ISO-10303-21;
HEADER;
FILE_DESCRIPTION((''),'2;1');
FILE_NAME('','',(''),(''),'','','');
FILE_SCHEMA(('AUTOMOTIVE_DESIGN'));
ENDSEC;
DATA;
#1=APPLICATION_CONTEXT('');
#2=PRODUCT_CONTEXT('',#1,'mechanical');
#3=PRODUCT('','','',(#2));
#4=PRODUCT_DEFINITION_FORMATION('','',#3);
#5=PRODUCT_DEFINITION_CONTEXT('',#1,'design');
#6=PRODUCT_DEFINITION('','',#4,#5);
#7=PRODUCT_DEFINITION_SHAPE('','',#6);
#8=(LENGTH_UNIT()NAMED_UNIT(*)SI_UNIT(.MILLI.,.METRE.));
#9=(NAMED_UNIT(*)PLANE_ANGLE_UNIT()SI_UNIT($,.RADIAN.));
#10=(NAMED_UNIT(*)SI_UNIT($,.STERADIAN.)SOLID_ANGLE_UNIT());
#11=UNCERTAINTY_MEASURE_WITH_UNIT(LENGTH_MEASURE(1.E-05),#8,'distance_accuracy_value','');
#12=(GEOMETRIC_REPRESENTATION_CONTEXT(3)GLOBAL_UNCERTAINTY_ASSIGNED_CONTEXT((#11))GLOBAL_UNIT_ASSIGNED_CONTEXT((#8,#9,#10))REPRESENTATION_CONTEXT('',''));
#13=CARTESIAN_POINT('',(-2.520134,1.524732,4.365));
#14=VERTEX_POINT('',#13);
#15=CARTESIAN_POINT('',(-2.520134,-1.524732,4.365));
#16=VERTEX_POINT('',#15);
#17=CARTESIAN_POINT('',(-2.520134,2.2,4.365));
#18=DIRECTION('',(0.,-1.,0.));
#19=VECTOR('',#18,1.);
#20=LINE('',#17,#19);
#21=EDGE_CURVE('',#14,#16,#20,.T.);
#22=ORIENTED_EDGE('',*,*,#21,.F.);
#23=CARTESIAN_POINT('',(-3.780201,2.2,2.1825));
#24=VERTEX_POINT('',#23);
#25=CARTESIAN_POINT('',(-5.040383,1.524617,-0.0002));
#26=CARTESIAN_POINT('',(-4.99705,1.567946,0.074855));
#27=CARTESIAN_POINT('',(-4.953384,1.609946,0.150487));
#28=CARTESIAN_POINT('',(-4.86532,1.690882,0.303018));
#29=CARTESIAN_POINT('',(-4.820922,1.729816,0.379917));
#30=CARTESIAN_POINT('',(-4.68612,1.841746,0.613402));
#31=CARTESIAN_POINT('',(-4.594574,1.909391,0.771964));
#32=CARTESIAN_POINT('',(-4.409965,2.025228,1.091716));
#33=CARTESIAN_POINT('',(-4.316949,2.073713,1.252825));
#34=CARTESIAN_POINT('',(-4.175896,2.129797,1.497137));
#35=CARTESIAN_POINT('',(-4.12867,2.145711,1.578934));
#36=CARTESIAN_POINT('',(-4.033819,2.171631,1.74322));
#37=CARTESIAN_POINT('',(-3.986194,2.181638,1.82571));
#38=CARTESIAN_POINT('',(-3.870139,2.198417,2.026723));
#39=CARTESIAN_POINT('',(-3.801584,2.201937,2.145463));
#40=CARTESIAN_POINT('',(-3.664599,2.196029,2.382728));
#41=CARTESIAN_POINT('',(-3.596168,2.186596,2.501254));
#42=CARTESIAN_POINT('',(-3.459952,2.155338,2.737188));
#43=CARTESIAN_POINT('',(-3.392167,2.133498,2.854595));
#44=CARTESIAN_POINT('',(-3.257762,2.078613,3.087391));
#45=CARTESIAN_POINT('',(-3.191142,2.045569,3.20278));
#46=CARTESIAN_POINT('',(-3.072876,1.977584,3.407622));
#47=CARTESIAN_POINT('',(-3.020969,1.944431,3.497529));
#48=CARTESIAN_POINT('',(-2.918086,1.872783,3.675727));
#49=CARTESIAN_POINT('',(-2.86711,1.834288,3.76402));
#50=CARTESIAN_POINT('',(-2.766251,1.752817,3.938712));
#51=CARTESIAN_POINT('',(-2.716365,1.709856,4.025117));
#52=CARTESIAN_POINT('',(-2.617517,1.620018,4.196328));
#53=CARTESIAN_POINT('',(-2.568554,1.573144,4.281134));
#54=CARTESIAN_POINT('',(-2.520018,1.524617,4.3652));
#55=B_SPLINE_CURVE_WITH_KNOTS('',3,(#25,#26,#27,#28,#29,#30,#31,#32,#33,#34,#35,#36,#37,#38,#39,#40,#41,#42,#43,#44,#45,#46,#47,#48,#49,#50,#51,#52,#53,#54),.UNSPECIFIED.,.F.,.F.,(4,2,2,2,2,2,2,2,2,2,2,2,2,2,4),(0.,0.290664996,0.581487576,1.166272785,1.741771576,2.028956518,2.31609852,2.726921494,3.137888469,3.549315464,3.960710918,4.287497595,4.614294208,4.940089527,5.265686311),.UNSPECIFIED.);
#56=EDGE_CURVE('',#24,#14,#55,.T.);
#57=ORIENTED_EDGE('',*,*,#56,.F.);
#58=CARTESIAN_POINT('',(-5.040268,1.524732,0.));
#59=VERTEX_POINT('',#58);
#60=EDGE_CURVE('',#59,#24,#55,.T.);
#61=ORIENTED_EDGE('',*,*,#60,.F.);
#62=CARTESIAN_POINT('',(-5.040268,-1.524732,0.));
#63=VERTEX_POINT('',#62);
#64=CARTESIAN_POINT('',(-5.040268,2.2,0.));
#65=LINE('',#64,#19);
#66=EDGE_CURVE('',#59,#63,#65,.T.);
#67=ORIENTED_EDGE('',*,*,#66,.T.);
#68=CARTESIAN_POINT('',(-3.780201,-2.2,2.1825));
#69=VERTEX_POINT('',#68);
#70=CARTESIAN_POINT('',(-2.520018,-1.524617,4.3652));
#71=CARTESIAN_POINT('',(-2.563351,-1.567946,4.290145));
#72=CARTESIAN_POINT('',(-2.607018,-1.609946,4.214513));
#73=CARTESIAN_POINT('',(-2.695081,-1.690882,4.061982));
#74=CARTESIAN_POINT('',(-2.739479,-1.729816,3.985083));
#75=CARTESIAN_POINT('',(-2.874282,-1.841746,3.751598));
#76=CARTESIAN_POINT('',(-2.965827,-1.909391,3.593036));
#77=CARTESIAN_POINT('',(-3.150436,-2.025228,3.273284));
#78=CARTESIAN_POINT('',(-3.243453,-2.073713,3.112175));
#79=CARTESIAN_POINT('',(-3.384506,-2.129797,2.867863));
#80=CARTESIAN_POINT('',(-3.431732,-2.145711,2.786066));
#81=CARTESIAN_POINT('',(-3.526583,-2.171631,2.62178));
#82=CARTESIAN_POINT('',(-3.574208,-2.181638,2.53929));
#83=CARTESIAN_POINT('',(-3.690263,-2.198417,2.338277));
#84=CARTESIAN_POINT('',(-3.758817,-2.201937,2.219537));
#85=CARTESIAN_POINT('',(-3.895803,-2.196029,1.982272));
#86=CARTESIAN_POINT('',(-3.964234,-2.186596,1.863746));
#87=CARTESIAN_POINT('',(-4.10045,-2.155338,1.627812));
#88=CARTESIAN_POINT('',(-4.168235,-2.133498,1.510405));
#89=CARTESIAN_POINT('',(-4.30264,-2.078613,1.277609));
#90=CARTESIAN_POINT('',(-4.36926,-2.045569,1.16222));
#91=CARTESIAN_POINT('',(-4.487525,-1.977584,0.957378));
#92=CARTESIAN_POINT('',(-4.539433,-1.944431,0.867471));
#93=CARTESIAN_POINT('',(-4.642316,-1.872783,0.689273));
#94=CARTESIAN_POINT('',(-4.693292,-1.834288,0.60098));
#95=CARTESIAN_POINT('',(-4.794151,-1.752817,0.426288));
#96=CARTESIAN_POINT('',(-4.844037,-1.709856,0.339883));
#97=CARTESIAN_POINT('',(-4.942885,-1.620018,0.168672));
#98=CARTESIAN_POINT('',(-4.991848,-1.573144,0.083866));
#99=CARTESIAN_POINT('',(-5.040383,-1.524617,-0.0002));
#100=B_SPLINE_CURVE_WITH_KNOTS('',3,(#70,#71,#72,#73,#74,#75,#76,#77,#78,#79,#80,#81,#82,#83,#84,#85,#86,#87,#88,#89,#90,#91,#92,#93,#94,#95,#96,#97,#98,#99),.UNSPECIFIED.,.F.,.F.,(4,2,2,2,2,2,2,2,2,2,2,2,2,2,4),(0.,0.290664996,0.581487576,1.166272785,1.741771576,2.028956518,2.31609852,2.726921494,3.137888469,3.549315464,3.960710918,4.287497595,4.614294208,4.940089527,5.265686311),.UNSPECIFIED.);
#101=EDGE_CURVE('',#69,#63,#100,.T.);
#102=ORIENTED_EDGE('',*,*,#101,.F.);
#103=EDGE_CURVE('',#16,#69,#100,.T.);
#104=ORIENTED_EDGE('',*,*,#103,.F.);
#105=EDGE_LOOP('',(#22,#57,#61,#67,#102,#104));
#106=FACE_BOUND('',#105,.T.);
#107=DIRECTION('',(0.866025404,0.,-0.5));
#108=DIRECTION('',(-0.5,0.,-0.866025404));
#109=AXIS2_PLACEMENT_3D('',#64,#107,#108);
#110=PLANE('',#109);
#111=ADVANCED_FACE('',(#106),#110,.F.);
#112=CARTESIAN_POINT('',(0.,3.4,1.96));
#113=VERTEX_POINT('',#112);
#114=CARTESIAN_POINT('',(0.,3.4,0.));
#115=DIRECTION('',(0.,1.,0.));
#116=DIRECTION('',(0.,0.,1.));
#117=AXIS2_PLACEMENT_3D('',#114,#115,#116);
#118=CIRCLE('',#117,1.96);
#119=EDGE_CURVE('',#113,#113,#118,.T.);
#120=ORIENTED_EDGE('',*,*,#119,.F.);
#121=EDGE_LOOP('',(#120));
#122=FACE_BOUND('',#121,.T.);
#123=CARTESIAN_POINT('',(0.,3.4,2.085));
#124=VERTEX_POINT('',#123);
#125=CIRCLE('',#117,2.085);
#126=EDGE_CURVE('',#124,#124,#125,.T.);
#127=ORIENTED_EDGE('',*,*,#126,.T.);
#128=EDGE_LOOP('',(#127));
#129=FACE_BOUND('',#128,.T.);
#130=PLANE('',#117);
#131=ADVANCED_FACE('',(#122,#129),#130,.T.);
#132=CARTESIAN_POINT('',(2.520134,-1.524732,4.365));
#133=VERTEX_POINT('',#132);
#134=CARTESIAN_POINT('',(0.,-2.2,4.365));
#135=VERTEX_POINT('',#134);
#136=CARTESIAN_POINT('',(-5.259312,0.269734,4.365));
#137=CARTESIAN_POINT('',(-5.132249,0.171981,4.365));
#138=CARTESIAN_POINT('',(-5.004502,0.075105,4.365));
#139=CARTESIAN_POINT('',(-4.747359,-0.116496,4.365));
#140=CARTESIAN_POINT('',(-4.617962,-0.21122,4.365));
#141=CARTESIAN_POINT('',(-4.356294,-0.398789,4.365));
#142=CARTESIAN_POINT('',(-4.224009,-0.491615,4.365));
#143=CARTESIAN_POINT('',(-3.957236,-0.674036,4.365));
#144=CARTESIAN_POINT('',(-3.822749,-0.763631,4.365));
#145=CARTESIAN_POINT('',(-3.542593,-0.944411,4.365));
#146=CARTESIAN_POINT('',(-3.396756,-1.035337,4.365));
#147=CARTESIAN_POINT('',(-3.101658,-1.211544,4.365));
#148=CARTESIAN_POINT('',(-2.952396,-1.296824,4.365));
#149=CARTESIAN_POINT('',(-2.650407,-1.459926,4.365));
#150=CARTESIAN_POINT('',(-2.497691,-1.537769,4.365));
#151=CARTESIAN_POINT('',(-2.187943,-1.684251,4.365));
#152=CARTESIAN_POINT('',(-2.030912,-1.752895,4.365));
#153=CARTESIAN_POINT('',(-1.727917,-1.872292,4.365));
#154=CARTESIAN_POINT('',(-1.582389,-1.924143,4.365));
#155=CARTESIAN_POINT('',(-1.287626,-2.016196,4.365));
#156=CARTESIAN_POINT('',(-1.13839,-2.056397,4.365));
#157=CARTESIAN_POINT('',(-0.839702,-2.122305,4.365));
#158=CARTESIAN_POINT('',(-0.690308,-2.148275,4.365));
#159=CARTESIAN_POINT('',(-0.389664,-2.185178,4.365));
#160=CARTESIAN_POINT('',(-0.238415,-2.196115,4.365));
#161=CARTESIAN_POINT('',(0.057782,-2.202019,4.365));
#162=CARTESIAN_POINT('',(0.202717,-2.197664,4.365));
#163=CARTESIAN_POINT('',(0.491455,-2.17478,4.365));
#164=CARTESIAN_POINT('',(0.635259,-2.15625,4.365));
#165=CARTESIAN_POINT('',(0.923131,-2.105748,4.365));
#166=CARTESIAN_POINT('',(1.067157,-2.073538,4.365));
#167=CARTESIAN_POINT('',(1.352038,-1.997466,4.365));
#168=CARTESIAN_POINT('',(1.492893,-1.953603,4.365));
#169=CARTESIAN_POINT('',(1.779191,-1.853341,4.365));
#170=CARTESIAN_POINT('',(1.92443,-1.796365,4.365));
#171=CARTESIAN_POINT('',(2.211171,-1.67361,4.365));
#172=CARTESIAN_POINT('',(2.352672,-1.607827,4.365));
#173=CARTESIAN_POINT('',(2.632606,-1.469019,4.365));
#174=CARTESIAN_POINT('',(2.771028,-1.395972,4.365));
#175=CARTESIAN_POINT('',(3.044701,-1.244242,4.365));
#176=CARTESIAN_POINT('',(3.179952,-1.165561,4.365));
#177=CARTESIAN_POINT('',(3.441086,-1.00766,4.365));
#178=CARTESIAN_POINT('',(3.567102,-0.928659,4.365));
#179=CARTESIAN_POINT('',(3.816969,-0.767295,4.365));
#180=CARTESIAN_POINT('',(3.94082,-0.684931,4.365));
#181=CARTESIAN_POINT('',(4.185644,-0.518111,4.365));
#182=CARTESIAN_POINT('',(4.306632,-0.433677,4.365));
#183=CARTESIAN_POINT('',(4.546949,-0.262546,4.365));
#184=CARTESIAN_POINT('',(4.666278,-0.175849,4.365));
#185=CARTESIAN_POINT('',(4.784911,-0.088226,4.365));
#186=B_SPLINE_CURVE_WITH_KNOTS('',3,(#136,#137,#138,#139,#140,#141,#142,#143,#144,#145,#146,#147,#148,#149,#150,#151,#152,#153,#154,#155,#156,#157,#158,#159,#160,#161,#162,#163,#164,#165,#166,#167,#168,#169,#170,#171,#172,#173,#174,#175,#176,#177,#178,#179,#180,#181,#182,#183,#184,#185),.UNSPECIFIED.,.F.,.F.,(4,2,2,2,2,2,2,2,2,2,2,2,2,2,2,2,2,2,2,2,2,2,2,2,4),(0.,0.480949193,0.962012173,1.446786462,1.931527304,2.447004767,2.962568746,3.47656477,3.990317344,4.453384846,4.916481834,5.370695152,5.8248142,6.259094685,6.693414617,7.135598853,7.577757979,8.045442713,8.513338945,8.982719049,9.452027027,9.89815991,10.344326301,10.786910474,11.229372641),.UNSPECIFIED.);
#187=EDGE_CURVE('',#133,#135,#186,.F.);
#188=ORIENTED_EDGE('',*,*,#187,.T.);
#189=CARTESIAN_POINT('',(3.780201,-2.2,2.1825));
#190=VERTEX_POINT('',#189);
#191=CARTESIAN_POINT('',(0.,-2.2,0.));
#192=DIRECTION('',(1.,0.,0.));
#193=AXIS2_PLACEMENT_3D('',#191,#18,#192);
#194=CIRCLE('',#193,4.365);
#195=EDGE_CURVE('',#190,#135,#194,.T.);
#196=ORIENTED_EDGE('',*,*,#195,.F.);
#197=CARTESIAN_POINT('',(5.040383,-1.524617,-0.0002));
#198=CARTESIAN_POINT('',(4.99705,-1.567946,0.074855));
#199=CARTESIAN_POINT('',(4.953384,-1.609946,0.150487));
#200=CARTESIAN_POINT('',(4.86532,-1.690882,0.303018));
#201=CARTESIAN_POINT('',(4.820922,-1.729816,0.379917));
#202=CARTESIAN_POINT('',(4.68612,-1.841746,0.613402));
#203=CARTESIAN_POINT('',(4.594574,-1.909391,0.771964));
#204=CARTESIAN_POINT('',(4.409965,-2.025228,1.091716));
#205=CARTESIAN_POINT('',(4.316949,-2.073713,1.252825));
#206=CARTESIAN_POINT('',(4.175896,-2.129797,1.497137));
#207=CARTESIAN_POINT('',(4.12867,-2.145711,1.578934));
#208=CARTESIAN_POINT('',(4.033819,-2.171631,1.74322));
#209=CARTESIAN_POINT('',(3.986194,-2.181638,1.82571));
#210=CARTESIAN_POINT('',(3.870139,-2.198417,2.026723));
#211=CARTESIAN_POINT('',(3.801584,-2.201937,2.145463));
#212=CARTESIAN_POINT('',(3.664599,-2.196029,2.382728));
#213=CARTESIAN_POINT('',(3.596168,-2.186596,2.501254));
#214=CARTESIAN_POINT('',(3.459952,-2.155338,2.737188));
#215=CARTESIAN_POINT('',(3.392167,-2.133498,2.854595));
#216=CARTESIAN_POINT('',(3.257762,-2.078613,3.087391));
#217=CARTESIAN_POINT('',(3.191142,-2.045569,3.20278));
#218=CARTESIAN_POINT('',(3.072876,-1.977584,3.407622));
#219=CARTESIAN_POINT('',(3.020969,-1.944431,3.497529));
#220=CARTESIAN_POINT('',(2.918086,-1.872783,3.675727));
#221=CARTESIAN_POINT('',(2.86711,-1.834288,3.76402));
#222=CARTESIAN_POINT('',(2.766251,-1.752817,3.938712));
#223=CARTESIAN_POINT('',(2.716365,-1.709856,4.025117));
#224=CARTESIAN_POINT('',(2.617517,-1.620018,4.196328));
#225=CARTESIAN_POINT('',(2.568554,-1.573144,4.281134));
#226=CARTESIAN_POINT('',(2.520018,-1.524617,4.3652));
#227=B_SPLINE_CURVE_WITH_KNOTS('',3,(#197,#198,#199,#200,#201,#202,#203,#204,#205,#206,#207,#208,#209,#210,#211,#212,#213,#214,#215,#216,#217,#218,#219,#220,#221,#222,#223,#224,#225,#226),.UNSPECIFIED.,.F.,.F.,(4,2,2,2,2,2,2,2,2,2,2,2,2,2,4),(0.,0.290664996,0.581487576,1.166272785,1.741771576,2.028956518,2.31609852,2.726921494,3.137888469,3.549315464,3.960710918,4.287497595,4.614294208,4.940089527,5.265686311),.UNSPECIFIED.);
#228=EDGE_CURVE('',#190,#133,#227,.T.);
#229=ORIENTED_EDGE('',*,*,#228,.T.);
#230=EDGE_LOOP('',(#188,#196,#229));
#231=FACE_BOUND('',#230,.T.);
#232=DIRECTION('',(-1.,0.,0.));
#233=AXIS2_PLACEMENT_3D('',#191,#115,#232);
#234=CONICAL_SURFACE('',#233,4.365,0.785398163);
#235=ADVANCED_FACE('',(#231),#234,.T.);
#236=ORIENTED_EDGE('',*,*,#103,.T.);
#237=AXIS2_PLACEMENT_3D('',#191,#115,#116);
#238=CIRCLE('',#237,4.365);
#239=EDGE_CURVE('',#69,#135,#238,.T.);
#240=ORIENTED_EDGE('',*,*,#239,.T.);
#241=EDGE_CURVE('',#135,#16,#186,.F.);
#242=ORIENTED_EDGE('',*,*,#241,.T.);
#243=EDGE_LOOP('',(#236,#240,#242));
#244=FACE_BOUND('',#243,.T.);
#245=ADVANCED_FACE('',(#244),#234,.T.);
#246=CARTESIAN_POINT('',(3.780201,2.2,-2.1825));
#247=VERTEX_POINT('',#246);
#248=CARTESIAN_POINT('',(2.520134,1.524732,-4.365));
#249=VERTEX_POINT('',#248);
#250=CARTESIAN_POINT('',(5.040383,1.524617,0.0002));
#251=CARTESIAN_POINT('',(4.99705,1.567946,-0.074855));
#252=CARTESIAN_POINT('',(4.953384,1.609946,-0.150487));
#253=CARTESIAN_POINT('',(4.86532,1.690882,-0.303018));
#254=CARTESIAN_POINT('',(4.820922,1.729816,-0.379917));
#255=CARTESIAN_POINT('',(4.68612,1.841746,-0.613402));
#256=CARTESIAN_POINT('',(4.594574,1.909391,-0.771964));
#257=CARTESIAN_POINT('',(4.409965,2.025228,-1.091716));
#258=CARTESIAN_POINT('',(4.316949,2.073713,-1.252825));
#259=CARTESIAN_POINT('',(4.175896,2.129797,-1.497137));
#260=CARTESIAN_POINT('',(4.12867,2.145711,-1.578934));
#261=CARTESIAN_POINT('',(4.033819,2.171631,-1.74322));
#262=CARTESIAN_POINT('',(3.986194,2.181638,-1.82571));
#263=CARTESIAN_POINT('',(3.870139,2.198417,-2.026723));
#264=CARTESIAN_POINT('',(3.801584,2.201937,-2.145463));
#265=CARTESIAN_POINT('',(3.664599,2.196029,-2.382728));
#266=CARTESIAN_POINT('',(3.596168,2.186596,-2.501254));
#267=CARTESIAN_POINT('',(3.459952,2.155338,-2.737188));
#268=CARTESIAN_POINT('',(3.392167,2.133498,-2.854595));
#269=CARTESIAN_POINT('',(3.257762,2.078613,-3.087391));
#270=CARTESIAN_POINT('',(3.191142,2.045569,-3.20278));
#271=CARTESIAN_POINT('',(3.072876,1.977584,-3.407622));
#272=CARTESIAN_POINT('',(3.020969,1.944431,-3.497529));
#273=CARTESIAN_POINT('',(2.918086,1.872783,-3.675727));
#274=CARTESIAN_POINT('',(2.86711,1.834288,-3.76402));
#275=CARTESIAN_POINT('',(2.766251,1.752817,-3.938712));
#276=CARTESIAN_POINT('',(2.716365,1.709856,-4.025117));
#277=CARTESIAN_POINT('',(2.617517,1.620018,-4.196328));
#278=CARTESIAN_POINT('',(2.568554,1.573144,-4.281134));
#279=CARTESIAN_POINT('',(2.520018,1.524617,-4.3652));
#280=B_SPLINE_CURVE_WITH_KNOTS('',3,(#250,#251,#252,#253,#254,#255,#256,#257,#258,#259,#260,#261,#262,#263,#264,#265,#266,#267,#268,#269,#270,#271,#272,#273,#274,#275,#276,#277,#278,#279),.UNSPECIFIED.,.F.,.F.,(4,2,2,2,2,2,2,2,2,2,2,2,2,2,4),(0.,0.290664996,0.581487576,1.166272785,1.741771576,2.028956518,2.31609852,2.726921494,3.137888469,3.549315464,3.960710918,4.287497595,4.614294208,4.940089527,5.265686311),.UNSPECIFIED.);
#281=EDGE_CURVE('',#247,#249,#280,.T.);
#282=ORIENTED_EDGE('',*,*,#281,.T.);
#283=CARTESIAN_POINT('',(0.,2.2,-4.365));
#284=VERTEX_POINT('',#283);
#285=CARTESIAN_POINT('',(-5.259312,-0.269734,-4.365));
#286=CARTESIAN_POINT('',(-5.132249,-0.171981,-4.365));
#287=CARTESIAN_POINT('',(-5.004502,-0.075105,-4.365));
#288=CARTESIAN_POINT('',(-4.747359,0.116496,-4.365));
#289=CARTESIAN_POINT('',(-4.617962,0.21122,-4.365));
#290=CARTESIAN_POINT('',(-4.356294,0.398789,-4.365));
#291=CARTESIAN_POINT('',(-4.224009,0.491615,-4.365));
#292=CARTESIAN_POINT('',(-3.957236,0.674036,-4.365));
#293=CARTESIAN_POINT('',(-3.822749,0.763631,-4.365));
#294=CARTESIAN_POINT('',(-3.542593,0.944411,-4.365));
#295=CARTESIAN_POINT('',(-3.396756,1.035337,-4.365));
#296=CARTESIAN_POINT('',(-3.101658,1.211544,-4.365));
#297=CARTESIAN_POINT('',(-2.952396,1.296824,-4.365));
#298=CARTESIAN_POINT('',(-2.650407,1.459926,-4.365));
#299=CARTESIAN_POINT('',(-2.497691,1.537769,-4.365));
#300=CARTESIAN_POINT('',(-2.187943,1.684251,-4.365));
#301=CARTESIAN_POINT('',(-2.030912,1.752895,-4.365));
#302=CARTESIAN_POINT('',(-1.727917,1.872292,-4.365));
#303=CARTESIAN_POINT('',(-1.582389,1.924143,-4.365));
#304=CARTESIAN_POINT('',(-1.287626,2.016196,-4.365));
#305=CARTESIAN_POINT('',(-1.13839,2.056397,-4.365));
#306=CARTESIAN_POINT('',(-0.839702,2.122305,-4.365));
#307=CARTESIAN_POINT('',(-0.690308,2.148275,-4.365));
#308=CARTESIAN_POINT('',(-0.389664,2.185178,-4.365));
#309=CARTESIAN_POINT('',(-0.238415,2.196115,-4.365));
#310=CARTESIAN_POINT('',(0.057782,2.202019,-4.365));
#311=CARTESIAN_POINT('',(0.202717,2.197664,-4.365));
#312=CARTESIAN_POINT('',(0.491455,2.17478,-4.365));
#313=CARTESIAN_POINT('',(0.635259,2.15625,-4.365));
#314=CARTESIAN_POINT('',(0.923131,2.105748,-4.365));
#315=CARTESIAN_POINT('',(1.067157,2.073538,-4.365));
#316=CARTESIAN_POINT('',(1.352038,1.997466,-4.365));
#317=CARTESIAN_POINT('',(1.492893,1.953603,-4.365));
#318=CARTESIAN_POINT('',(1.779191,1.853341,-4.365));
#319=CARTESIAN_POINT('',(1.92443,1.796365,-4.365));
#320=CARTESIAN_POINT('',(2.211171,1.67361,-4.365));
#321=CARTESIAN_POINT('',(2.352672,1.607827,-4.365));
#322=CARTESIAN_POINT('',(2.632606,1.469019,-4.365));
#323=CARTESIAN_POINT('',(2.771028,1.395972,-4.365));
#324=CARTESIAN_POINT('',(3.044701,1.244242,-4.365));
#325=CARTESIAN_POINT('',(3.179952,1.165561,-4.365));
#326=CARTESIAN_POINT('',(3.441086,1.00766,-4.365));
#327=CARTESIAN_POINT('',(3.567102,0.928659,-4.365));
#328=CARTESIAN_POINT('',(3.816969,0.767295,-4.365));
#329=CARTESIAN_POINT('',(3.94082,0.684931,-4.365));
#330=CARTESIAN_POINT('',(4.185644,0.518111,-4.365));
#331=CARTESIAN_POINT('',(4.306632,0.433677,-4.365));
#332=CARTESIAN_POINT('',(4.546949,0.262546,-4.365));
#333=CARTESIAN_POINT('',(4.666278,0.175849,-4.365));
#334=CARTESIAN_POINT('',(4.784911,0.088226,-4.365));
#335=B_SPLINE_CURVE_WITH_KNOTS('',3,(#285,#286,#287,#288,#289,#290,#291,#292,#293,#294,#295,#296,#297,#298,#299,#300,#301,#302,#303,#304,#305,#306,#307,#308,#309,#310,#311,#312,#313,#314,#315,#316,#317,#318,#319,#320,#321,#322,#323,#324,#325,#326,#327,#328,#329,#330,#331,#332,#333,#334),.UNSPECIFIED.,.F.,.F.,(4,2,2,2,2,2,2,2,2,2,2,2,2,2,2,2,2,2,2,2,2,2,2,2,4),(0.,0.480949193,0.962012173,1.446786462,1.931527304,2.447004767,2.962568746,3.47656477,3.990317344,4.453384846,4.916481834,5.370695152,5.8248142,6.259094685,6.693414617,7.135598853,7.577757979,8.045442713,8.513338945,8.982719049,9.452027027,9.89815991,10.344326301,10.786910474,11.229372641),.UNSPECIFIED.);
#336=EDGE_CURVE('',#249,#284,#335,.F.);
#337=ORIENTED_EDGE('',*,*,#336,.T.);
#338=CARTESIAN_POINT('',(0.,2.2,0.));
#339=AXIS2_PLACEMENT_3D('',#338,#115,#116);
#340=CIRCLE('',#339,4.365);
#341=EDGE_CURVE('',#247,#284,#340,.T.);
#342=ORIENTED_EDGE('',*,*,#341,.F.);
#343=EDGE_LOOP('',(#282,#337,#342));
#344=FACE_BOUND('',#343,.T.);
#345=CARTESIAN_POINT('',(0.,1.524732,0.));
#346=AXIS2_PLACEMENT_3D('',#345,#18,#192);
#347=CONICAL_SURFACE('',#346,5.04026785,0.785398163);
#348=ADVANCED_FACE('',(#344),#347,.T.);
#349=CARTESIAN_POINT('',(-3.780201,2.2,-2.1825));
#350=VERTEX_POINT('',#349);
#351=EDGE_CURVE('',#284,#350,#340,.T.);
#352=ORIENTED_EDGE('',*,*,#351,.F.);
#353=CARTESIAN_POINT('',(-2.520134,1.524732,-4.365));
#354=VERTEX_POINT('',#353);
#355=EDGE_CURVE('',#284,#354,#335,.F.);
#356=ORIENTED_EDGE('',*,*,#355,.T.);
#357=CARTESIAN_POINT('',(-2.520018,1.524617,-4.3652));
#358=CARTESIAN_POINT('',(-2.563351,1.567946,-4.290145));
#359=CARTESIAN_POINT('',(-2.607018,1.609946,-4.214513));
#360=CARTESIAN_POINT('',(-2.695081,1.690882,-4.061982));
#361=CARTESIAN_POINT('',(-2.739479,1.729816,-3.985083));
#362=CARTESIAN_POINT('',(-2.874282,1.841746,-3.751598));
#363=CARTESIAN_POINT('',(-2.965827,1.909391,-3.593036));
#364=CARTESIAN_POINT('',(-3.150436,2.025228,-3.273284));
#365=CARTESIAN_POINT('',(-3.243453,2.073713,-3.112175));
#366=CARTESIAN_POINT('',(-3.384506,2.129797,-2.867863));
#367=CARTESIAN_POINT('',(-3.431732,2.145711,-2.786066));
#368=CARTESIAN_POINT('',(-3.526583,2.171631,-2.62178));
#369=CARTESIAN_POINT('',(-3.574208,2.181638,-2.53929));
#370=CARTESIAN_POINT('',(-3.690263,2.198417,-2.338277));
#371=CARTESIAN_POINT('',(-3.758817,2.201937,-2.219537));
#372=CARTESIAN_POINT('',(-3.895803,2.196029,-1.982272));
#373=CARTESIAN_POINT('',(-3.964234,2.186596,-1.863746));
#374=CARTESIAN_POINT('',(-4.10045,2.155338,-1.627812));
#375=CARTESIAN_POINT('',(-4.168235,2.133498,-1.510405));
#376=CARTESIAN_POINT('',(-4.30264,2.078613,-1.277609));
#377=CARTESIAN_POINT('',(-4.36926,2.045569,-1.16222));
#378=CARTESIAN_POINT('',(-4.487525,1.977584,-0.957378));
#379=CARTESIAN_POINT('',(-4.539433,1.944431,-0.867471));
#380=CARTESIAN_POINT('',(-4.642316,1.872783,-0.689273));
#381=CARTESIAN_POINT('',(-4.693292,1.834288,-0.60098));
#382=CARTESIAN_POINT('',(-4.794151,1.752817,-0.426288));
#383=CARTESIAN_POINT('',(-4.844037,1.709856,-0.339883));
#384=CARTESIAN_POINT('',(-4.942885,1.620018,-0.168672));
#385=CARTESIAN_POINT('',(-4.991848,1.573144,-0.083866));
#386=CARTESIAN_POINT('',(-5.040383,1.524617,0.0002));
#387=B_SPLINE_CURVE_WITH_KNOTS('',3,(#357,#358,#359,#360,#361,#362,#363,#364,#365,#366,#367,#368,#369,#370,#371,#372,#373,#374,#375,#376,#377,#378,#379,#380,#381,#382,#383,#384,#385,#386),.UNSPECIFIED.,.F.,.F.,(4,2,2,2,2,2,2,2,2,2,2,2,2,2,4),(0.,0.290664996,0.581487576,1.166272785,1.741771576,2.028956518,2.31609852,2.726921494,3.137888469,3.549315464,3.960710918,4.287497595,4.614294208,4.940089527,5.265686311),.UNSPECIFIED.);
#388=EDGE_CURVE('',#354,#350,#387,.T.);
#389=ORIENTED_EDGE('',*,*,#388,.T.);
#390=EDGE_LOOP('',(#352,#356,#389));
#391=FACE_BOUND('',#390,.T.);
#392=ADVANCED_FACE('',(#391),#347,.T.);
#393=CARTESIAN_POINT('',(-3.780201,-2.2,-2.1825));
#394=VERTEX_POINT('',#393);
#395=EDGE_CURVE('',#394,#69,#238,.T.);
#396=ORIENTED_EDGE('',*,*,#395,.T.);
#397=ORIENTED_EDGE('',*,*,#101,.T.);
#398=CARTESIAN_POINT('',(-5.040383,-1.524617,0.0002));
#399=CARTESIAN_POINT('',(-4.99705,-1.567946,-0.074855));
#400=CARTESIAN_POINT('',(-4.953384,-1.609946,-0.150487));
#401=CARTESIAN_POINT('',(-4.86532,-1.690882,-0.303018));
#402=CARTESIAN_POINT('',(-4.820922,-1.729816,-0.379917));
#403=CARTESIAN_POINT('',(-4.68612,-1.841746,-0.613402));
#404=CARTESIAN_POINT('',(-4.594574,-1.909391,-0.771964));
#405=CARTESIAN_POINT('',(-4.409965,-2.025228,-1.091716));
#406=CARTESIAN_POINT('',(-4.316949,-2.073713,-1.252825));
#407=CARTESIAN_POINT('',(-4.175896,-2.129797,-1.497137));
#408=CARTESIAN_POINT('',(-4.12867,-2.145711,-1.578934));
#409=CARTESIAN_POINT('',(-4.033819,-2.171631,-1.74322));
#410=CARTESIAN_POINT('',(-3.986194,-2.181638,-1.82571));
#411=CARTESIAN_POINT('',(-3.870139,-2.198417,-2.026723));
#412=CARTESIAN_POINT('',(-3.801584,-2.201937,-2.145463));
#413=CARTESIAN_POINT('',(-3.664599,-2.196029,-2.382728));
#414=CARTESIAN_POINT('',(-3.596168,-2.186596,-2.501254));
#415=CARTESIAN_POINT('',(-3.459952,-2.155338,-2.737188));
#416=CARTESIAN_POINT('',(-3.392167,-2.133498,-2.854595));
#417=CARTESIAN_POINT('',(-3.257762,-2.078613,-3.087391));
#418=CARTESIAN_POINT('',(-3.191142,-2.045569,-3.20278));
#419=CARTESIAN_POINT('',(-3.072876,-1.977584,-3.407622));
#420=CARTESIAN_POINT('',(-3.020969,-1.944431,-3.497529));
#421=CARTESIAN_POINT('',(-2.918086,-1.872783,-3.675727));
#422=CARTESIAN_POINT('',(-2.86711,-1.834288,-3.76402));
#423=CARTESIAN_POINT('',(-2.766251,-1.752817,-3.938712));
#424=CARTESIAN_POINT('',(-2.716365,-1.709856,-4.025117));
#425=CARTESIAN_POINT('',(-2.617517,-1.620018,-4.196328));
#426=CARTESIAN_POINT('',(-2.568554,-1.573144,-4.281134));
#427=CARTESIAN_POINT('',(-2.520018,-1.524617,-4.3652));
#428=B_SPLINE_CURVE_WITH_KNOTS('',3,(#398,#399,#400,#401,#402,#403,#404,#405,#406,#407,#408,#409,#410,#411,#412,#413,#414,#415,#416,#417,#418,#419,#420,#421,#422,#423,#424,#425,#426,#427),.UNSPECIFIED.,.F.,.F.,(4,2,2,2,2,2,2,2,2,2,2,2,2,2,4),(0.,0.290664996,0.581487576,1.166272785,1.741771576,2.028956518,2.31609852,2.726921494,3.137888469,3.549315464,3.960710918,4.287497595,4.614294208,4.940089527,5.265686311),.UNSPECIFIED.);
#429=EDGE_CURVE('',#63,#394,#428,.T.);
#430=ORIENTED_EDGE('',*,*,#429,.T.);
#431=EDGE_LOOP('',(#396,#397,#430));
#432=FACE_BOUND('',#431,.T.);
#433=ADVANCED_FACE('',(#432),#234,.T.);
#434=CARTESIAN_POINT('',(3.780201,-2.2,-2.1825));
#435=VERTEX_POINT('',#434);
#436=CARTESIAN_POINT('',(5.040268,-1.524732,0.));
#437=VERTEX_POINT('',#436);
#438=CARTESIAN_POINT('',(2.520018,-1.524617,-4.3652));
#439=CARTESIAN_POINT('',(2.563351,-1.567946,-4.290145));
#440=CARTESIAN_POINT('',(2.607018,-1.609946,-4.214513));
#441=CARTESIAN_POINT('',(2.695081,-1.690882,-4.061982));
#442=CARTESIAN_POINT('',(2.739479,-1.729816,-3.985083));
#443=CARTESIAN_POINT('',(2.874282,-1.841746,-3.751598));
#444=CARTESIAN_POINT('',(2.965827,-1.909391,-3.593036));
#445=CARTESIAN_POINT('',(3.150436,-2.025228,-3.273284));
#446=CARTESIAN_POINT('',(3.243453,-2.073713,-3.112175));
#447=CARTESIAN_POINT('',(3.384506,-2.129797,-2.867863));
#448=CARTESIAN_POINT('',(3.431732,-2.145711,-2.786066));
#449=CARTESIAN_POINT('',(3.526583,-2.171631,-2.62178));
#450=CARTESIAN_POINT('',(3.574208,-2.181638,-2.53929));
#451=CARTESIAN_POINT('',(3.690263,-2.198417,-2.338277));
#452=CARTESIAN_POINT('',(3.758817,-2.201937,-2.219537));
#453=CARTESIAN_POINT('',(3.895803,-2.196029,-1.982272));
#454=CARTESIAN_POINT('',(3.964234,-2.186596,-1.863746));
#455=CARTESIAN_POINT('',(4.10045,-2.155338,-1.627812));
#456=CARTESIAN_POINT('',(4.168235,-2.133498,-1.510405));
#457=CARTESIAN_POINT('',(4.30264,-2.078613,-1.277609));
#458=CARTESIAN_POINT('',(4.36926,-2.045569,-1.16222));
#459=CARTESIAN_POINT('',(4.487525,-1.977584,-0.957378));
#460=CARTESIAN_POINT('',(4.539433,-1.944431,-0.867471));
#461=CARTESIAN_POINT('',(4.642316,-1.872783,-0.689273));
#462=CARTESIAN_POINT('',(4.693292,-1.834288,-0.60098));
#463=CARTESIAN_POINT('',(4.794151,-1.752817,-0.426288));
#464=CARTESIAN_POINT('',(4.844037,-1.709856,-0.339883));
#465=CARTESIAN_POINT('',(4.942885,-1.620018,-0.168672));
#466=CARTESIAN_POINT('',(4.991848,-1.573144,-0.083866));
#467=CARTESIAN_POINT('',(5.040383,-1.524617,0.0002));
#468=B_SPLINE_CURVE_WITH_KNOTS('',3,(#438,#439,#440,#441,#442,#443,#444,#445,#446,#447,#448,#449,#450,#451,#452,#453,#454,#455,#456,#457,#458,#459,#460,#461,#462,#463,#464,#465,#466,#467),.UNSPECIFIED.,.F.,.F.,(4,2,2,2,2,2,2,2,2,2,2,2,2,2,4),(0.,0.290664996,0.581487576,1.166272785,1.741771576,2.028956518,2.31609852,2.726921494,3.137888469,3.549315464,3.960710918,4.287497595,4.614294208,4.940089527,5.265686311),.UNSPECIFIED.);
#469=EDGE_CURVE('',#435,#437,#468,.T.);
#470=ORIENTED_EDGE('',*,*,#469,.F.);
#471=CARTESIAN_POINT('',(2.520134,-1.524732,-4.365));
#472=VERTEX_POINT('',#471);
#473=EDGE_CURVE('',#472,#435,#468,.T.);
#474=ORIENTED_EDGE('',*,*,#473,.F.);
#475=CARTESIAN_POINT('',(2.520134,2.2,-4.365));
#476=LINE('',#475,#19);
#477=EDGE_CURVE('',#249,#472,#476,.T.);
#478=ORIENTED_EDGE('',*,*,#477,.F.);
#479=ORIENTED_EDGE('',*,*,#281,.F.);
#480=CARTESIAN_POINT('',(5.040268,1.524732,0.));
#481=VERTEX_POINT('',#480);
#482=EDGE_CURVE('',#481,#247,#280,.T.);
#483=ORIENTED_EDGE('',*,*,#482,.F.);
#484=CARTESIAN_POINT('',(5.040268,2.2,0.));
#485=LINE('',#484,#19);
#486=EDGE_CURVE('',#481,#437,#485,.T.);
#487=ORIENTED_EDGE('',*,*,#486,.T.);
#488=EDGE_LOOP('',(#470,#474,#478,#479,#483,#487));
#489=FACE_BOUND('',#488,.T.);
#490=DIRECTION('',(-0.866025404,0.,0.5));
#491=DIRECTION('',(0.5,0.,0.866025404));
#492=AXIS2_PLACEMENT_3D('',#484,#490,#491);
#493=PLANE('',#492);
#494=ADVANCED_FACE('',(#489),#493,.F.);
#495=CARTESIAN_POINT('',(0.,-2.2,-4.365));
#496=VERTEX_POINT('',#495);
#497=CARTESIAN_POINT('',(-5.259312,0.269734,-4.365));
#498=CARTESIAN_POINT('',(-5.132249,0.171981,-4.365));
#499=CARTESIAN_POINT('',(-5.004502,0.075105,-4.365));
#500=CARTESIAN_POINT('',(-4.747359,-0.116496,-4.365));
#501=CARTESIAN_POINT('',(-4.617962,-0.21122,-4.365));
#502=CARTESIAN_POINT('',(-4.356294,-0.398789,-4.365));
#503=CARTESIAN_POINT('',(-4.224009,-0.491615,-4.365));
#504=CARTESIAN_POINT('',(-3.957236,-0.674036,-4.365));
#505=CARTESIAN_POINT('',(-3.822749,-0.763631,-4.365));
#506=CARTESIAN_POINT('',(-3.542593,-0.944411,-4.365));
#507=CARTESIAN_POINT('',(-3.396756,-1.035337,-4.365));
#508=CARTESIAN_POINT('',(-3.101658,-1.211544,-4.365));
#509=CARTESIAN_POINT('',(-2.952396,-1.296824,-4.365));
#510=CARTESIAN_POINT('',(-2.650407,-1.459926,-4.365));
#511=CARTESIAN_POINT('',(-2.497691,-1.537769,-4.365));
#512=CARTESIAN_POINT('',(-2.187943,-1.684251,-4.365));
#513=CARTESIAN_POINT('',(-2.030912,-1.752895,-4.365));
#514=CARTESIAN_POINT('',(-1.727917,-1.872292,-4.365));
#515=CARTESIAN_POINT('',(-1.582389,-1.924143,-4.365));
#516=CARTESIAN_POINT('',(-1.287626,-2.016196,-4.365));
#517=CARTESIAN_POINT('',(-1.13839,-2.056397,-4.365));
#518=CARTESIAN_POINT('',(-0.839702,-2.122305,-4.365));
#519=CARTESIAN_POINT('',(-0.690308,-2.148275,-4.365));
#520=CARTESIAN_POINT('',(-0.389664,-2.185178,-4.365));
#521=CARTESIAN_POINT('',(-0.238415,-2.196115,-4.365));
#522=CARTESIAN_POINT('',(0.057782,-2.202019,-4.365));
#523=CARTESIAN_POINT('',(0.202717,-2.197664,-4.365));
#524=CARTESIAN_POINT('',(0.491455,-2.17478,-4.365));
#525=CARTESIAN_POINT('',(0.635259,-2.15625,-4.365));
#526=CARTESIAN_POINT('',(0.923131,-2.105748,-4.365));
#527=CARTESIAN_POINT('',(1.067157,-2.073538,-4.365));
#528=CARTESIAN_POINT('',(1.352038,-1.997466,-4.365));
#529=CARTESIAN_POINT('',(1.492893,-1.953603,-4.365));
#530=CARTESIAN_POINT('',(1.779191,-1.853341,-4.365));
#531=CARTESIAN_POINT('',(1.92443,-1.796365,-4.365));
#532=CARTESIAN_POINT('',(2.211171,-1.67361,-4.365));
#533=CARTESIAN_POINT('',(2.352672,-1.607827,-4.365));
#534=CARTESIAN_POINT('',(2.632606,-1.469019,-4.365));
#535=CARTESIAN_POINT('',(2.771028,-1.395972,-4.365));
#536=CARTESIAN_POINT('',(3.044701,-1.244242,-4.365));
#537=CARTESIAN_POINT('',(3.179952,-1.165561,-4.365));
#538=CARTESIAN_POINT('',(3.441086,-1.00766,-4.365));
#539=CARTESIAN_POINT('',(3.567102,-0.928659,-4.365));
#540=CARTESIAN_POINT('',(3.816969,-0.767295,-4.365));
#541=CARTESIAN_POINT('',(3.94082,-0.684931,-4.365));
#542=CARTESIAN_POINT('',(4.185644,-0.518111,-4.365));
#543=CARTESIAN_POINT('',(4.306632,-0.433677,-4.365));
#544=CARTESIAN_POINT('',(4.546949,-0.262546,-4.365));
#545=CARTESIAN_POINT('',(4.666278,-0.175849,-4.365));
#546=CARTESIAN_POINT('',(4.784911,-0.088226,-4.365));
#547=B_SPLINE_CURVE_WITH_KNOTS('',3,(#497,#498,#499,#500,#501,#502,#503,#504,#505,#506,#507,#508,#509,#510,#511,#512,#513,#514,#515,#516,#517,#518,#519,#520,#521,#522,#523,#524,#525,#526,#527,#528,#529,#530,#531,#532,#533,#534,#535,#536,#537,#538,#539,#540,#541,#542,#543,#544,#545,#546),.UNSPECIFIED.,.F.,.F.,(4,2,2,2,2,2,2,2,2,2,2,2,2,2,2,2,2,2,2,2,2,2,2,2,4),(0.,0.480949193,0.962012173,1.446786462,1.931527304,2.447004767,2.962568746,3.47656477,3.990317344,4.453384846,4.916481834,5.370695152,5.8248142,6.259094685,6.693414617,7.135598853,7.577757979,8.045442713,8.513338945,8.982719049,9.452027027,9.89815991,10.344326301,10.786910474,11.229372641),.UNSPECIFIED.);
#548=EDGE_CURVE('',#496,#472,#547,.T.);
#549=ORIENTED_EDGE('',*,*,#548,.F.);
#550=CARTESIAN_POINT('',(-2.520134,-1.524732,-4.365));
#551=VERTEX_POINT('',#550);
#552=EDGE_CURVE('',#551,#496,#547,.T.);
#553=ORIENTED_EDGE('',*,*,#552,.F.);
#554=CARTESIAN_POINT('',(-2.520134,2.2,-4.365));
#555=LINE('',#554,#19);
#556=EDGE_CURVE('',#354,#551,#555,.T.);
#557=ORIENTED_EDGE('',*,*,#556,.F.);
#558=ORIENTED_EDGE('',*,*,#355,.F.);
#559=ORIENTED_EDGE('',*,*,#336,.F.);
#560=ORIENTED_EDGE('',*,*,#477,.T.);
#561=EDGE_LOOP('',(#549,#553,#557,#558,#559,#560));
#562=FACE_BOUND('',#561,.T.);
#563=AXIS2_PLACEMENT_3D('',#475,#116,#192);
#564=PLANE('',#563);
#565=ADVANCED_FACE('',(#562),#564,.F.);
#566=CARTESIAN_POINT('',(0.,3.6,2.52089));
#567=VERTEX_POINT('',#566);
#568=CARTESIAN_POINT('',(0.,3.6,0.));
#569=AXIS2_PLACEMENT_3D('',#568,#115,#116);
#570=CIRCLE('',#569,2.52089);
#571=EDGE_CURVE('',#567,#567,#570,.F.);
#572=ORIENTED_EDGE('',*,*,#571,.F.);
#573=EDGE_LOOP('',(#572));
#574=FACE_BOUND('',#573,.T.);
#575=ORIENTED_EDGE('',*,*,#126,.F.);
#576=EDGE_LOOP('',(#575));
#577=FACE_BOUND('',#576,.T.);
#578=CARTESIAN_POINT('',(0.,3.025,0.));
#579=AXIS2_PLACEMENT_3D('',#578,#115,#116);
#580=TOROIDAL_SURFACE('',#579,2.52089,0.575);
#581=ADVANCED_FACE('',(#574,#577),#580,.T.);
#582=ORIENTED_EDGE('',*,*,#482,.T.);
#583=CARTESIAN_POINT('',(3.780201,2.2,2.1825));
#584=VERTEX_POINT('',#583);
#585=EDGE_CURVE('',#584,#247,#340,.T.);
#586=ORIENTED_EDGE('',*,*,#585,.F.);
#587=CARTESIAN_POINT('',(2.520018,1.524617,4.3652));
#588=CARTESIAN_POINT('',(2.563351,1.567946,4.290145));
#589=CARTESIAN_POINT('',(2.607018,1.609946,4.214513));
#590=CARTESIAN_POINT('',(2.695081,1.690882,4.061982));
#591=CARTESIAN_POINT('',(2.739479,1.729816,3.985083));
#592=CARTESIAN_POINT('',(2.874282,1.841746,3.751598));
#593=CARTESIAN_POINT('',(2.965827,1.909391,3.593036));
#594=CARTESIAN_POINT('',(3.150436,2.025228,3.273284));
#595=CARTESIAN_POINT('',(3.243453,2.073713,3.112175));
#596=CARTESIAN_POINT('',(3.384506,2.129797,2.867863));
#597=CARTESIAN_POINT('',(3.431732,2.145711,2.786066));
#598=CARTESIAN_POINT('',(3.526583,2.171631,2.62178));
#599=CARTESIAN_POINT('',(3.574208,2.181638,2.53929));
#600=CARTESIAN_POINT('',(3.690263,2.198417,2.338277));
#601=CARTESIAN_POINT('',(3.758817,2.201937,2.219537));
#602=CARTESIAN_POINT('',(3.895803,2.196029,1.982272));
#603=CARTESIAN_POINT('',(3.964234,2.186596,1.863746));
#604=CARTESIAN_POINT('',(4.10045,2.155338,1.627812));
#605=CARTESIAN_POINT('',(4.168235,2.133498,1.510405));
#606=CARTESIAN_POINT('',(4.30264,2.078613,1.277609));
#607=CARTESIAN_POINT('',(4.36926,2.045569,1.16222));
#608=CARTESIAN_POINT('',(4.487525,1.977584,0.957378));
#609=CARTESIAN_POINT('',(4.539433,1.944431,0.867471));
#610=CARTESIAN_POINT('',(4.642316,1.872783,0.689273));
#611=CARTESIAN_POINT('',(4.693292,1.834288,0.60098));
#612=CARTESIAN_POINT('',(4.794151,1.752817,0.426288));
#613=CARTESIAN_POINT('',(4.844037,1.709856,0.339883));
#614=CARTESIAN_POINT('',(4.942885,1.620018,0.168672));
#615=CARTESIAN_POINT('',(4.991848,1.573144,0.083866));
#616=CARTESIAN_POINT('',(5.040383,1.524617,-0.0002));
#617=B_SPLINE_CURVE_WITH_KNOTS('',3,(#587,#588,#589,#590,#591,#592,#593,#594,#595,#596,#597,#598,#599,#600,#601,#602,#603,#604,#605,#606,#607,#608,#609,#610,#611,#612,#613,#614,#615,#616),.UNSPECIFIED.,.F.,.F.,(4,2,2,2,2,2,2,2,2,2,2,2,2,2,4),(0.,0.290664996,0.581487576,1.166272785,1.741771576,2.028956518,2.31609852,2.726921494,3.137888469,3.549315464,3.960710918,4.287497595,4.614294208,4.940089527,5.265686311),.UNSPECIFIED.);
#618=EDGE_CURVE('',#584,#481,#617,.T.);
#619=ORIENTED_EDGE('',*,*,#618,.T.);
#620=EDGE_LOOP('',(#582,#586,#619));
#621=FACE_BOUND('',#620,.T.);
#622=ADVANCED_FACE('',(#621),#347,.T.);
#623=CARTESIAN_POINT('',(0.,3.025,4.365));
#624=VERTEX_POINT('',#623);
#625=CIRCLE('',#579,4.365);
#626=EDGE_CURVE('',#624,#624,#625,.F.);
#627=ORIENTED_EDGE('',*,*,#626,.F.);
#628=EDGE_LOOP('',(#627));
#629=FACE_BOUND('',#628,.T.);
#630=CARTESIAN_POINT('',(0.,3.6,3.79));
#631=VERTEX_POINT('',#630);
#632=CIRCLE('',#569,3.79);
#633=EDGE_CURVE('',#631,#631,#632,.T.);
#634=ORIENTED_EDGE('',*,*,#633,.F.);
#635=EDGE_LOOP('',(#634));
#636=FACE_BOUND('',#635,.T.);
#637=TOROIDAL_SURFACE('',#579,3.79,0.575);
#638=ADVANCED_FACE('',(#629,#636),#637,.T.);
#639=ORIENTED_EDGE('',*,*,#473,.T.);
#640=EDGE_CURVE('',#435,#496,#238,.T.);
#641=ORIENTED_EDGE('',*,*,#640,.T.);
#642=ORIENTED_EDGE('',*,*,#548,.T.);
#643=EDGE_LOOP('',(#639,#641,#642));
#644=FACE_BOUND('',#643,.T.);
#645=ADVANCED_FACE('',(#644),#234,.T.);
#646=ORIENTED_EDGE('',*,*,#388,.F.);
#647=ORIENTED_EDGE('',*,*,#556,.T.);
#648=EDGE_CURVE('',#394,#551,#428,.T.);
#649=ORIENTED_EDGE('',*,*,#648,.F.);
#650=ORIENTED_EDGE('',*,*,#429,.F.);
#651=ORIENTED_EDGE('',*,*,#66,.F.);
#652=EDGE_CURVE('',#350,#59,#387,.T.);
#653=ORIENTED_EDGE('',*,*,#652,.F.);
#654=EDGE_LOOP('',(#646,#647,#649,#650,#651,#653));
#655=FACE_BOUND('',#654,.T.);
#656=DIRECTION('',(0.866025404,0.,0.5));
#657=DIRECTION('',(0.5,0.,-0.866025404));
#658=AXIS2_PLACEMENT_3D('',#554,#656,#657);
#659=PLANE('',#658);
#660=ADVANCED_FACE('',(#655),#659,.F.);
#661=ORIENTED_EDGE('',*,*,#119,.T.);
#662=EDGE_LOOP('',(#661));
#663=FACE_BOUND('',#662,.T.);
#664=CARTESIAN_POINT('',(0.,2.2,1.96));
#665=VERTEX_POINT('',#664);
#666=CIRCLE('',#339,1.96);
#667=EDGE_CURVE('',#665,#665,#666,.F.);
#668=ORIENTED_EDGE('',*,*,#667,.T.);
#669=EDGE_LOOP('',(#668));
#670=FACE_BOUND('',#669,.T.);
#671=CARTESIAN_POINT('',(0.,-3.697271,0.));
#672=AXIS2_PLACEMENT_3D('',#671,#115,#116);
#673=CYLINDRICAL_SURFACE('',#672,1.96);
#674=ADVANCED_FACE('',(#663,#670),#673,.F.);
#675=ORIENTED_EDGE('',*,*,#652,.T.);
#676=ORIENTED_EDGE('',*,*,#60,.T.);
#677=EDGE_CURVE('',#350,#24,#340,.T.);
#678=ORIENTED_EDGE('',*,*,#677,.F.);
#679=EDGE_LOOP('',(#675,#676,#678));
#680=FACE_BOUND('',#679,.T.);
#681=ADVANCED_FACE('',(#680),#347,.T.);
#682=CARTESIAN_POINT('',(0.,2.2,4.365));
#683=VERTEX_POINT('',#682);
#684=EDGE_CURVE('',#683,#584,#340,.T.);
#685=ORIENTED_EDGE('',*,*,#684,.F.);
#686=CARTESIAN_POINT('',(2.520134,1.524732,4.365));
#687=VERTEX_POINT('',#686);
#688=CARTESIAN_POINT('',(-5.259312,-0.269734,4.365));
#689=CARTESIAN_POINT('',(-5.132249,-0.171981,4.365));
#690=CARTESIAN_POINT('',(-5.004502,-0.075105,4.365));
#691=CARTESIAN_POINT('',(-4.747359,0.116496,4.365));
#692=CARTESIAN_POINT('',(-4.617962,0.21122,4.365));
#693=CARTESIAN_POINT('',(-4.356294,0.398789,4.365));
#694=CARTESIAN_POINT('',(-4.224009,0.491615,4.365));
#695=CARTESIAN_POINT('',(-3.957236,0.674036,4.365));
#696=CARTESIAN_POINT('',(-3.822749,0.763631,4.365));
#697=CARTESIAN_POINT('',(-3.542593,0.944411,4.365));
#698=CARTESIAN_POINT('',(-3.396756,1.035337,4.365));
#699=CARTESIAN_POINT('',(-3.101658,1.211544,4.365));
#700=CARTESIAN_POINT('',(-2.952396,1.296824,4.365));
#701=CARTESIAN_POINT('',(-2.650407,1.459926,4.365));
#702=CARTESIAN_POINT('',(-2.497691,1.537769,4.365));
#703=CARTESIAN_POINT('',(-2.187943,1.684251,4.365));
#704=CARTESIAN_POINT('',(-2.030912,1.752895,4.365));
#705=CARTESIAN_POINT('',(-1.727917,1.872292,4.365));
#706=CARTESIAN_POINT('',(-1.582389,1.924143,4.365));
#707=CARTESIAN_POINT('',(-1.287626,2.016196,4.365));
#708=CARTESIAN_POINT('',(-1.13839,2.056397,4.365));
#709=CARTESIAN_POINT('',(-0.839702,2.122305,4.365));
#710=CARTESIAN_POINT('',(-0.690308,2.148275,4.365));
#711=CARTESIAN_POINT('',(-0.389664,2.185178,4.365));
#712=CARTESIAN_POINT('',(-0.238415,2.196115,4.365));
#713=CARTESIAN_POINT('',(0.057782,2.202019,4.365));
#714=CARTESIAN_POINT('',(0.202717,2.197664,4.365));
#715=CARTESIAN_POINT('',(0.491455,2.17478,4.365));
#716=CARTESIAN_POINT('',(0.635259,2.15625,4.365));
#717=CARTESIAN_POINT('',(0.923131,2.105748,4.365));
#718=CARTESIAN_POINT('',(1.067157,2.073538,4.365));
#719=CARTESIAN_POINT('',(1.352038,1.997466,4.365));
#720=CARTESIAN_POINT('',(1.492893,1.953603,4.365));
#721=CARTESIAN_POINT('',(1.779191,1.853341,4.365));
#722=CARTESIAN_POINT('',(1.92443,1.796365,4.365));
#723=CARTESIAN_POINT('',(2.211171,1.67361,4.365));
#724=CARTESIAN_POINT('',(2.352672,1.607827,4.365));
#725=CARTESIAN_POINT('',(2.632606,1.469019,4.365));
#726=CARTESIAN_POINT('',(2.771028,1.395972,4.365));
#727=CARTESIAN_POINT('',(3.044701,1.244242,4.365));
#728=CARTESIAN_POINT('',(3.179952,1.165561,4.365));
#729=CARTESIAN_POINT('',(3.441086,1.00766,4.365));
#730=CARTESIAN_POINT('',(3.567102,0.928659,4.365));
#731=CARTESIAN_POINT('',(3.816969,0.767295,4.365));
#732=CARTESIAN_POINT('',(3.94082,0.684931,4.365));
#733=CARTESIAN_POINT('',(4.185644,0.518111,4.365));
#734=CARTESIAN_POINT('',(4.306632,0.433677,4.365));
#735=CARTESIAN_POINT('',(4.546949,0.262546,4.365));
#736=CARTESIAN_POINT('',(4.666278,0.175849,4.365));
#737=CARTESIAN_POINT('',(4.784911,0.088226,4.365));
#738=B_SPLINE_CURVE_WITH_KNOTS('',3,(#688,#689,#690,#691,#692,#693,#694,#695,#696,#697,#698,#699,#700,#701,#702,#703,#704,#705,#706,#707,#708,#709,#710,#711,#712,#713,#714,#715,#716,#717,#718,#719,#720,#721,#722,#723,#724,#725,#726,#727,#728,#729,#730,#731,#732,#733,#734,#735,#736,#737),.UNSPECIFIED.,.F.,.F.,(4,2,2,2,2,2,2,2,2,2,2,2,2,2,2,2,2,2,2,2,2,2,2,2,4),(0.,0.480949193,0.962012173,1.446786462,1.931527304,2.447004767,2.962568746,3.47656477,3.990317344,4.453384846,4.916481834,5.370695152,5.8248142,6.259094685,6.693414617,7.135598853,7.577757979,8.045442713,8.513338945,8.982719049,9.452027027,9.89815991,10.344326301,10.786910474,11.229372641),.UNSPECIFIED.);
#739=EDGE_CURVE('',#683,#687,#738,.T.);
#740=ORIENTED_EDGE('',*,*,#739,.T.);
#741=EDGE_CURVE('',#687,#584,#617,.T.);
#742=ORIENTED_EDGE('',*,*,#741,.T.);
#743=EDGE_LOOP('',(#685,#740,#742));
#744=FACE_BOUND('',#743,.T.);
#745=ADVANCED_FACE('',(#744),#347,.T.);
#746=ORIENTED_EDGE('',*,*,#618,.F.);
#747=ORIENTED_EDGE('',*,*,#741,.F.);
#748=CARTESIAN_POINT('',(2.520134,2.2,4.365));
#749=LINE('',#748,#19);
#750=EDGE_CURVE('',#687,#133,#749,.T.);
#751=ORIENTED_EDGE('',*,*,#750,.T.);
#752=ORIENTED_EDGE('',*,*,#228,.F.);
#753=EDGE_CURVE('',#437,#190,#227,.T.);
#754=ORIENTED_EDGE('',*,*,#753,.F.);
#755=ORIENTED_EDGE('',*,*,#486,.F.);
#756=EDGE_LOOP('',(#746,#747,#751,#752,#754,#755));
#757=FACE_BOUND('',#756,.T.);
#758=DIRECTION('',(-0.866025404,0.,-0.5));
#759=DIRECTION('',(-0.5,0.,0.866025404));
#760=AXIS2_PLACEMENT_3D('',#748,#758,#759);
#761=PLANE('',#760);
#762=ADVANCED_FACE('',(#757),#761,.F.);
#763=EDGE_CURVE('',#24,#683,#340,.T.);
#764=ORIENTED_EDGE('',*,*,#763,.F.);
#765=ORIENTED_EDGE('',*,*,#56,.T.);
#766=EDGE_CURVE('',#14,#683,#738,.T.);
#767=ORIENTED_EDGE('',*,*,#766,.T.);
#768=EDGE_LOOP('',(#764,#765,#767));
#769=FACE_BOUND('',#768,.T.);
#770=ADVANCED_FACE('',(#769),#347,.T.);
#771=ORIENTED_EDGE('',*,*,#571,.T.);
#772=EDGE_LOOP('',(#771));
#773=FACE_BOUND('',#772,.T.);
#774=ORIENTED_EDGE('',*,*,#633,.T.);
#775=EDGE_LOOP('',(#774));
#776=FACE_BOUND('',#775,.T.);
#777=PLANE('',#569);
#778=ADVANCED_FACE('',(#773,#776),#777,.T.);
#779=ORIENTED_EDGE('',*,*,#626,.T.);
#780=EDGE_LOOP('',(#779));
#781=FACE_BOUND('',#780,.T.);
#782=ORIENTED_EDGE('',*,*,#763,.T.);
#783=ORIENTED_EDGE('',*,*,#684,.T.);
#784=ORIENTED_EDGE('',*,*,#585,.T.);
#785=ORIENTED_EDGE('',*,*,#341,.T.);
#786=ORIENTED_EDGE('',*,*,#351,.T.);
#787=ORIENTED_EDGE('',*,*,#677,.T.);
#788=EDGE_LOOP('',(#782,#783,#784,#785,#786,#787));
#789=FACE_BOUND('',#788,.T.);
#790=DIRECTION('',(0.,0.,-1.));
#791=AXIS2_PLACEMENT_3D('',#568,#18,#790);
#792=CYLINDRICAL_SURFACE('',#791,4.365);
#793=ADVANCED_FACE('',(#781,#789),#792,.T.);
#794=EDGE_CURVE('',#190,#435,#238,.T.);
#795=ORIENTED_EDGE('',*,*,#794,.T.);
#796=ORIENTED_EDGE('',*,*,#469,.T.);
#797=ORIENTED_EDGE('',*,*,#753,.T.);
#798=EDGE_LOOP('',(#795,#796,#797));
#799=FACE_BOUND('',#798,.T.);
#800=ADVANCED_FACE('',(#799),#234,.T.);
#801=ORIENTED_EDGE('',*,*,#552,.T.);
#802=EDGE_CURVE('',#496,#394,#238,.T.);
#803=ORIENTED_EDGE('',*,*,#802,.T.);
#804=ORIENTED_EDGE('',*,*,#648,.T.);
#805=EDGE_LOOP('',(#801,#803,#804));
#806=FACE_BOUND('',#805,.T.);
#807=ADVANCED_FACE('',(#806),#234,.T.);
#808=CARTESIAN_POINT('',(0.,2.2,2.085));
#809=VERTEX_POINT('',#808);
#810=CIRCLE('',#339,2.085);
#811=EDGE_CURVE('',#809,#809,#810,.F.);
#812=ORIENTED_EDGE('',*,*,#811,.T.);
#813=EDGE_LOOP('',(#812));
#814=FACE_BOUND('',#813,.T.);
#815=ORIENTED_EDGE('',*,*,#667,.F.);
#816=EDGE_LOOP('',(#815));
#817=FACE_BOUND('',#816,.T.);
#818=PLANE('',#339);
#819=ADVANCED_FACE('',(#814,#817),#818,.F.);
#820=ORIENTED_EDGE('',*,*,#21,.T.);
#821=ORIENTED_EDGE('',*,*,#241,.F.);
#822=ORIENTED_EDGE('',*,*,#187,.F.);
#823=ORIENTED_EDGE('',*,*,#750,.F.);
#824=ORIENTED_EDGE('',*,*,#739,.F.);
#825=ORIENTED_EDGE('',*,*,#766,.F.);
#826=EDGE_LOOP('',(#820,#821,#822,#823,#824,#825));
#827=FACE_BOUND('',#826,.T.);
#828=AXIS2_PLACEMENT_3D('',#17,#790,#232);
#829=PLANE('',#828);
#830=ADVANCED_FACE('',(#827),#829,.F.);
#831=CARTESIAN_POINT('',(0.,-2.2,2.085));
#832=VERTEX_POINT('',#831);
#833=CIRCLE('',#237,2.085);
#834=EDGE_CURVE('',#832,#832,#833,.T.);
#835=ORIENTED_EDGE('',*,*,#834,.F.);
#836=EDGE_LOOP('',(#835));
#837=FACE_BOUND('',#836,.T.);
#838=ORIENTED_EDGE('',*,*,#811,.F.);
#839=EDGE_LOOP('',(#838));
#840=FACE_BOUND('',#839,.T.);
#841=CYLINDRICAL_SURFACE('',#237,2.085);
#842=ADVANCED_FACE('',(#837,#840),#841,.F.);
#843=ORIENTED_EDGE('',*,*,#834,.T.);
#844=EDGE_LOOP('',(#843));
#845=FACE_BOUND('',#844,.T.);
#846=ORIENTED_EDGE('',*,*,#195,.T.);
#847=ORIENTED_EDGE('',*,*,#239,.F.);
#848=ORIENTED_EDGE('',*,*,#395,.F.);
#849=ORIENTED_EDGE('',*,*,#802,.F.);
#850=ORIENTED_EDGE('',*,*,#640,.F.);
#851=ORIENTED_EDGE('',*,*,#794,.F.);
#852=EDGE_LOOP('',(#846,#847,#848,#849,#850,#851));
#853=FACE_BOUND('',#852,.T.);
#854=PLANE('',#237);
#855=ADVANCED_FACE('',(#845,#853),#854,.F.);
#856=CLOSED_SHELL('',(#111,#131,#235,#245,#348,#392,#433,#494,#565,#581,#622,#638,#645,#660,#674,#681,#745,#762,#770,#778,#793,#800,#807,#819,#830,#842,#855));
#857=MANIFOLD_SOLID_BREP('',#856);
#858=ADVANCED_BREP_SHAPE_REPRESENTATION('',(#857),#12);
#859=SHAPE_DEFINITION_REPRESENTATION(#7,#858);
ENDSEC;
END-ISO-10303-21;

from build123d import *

# Parameters (mm, degrees)
EXTRUDE_1_DEPTH     = 2.2
SKETCH_3_R          = 4.365
EXTRUDE_2_DEPTH     = 1.4
SKETCH_4_R          = 2.085
CUT_EXTRUDE_1_DEPTH = 9.837280407
EXTRUDE_START       = -0.2
SKETCH_5_R          = 2.085
SKETCH_5_R_2        = 1.96
EXTRUDE_3_DEPTH     = 1.2
FILLET_1_R          = 0.575


with BuildPart() as part:
    # 草图1 → 凸台-拉伸1 (new, symmetric)
    with BuildSketch(Plane(origin=(0, 0, 0), x_dir=(1, 0, 0), z_dir=(0, 1, 0))):
        Polygon((5.04026785, 0), (2.520133925, 4.365), (-2.520133925, 4.365), (-5.04026785, 0), (-2.520133925, -4.365), (2.520133925, -4.365), align=None)
    extrude(amount=EXTRUDE_1_DEPTH, both=True)

    # 草图3 → 凸台-拉伸2 (add)
    with BuildSketch(Plane(origin=(0, 2.2, 0), x_dir=(1, 0, 0), z_dir=(0, 1, 0))):
        with Locations(Location((0, 0, 0), (0, 0, 270))):
            Circle(SKETCH_3_R)
    extrude(amount=EXTRUDE_2_DEPTH)

    # 草图4 → 切除-拉伸1 (cut, through all)
    with BuildSketch(Plane(origin=(0, 3.6, 0), x_dir=(1, 0, 0), z_dir=(0, 1, 0))):
        with Locations(Location((0, 0, 0), (0, 0, 270))):
            Circle(SKETCH_4_R)
    extrude(amount=-CUT_EXTRUDE_1_DEPTH, mode=Mode.SUBTRACT)

    # 草图5 → 凸台-拉伸3 (add)
    with BuildSketch(Plane(origin=(0, 3.6, 0), x_dir=(1, 0, 0), z_dir=(0, 1, 0)).offset(EXTRUDE_START)):
        with Locations(Location((0, 0, 0), (0, 0, 270))):
            Circle(SKETCH_5_R)
        with Locations(Location((0, 0, 0), (0, 0, 270))):
            Circle(SKETCH_5_R_2, mode=Mode.SUBTRACT)
    extrude(amount=-EXTRUDE_3_DEPTH)

    # 圆角1
    # the kernel refuses this fillet: 0.575 mm, written as the material it takes off along each edge
    with BuildSketch(Plane(origin=(0, 3.6, 0), x_dir=(0, 0, 1), z_dir=(-1, 0, 0))) as fillet_1_piece_1:
        with BuildLine():
            CenterArc((4.365 - FILLET_1_R, -FILLET_1_R), FILLET_1_R, 0, 90)
            Line((4.365 - FILLET_1_R, 0), (4.365 - FILLET_1_R, FILLET_1_R * 0.02))
            Line((4.365 - FILLET_1_R, FILLET_1_R * 0.02), (4.365 + FILLET_1_R * 0.02, FILLET_1_R * 0.02))
            Line((4.365 + FILLET_1_R * 0.02, FILLET_1_R * 0.02), (4.365 + FILLET_1_R * 0.02, -FILLET_1_R))
            Line((4.365 + FILLET_1_R * 0.02, -FILLET_1_R), (4.365, -FILLET_1_R))
        make_face()
    revolve(axis=Axis((0, 3.6, 0), (0, 1, 0)), mode=Mode.SUBTRACT)
    with BuildSketch(Plane(origin=(0, 3.6, 0), x_dir=(0, 0, 1), z_dir=(-1, 0, 0))) as fillet_1_piece_2:
        with BuildLine():
            CenterArc((2.520889894, -0.575), FILLET_1_R, 90, 49.294293169)
            Line((2.085, -0.2), (2.076282202, -0.1925))
            ThreePointArc((2.076282202, -0.1925), (2.0735, -0.1), (2.0735, 0))
            Line((2.0735, 0), (2.085, 0.0115))
            Line((2.085, 0.0115), (2.520889894, 0.0115))
            Line((2.520889894, 0.0115), (2.520889894, 0))
        make_face()
    revolve(axis=Axis((0, 3.6, 0), (0, 1, 0)), mode=Mode.SUBTRACT)

    # 草图6 → 切除-旋转1 (revolve, cut)
    with BuildSketch(Plane.XY):
        Polygon((-5.04026785, 2.2), (-5.04026785, 1.52473215), (-4.365, 2.2), align=None)
        Polygon((-5.04026785, -2.2), (-5.04026785, -1.52473215), (-4.365, -2.2), align=None)
    revolve(axis=Axis((0, -1000, 0), (0, 1, 0)), mode=Mode.SUBTRACT)


solid = part.part
